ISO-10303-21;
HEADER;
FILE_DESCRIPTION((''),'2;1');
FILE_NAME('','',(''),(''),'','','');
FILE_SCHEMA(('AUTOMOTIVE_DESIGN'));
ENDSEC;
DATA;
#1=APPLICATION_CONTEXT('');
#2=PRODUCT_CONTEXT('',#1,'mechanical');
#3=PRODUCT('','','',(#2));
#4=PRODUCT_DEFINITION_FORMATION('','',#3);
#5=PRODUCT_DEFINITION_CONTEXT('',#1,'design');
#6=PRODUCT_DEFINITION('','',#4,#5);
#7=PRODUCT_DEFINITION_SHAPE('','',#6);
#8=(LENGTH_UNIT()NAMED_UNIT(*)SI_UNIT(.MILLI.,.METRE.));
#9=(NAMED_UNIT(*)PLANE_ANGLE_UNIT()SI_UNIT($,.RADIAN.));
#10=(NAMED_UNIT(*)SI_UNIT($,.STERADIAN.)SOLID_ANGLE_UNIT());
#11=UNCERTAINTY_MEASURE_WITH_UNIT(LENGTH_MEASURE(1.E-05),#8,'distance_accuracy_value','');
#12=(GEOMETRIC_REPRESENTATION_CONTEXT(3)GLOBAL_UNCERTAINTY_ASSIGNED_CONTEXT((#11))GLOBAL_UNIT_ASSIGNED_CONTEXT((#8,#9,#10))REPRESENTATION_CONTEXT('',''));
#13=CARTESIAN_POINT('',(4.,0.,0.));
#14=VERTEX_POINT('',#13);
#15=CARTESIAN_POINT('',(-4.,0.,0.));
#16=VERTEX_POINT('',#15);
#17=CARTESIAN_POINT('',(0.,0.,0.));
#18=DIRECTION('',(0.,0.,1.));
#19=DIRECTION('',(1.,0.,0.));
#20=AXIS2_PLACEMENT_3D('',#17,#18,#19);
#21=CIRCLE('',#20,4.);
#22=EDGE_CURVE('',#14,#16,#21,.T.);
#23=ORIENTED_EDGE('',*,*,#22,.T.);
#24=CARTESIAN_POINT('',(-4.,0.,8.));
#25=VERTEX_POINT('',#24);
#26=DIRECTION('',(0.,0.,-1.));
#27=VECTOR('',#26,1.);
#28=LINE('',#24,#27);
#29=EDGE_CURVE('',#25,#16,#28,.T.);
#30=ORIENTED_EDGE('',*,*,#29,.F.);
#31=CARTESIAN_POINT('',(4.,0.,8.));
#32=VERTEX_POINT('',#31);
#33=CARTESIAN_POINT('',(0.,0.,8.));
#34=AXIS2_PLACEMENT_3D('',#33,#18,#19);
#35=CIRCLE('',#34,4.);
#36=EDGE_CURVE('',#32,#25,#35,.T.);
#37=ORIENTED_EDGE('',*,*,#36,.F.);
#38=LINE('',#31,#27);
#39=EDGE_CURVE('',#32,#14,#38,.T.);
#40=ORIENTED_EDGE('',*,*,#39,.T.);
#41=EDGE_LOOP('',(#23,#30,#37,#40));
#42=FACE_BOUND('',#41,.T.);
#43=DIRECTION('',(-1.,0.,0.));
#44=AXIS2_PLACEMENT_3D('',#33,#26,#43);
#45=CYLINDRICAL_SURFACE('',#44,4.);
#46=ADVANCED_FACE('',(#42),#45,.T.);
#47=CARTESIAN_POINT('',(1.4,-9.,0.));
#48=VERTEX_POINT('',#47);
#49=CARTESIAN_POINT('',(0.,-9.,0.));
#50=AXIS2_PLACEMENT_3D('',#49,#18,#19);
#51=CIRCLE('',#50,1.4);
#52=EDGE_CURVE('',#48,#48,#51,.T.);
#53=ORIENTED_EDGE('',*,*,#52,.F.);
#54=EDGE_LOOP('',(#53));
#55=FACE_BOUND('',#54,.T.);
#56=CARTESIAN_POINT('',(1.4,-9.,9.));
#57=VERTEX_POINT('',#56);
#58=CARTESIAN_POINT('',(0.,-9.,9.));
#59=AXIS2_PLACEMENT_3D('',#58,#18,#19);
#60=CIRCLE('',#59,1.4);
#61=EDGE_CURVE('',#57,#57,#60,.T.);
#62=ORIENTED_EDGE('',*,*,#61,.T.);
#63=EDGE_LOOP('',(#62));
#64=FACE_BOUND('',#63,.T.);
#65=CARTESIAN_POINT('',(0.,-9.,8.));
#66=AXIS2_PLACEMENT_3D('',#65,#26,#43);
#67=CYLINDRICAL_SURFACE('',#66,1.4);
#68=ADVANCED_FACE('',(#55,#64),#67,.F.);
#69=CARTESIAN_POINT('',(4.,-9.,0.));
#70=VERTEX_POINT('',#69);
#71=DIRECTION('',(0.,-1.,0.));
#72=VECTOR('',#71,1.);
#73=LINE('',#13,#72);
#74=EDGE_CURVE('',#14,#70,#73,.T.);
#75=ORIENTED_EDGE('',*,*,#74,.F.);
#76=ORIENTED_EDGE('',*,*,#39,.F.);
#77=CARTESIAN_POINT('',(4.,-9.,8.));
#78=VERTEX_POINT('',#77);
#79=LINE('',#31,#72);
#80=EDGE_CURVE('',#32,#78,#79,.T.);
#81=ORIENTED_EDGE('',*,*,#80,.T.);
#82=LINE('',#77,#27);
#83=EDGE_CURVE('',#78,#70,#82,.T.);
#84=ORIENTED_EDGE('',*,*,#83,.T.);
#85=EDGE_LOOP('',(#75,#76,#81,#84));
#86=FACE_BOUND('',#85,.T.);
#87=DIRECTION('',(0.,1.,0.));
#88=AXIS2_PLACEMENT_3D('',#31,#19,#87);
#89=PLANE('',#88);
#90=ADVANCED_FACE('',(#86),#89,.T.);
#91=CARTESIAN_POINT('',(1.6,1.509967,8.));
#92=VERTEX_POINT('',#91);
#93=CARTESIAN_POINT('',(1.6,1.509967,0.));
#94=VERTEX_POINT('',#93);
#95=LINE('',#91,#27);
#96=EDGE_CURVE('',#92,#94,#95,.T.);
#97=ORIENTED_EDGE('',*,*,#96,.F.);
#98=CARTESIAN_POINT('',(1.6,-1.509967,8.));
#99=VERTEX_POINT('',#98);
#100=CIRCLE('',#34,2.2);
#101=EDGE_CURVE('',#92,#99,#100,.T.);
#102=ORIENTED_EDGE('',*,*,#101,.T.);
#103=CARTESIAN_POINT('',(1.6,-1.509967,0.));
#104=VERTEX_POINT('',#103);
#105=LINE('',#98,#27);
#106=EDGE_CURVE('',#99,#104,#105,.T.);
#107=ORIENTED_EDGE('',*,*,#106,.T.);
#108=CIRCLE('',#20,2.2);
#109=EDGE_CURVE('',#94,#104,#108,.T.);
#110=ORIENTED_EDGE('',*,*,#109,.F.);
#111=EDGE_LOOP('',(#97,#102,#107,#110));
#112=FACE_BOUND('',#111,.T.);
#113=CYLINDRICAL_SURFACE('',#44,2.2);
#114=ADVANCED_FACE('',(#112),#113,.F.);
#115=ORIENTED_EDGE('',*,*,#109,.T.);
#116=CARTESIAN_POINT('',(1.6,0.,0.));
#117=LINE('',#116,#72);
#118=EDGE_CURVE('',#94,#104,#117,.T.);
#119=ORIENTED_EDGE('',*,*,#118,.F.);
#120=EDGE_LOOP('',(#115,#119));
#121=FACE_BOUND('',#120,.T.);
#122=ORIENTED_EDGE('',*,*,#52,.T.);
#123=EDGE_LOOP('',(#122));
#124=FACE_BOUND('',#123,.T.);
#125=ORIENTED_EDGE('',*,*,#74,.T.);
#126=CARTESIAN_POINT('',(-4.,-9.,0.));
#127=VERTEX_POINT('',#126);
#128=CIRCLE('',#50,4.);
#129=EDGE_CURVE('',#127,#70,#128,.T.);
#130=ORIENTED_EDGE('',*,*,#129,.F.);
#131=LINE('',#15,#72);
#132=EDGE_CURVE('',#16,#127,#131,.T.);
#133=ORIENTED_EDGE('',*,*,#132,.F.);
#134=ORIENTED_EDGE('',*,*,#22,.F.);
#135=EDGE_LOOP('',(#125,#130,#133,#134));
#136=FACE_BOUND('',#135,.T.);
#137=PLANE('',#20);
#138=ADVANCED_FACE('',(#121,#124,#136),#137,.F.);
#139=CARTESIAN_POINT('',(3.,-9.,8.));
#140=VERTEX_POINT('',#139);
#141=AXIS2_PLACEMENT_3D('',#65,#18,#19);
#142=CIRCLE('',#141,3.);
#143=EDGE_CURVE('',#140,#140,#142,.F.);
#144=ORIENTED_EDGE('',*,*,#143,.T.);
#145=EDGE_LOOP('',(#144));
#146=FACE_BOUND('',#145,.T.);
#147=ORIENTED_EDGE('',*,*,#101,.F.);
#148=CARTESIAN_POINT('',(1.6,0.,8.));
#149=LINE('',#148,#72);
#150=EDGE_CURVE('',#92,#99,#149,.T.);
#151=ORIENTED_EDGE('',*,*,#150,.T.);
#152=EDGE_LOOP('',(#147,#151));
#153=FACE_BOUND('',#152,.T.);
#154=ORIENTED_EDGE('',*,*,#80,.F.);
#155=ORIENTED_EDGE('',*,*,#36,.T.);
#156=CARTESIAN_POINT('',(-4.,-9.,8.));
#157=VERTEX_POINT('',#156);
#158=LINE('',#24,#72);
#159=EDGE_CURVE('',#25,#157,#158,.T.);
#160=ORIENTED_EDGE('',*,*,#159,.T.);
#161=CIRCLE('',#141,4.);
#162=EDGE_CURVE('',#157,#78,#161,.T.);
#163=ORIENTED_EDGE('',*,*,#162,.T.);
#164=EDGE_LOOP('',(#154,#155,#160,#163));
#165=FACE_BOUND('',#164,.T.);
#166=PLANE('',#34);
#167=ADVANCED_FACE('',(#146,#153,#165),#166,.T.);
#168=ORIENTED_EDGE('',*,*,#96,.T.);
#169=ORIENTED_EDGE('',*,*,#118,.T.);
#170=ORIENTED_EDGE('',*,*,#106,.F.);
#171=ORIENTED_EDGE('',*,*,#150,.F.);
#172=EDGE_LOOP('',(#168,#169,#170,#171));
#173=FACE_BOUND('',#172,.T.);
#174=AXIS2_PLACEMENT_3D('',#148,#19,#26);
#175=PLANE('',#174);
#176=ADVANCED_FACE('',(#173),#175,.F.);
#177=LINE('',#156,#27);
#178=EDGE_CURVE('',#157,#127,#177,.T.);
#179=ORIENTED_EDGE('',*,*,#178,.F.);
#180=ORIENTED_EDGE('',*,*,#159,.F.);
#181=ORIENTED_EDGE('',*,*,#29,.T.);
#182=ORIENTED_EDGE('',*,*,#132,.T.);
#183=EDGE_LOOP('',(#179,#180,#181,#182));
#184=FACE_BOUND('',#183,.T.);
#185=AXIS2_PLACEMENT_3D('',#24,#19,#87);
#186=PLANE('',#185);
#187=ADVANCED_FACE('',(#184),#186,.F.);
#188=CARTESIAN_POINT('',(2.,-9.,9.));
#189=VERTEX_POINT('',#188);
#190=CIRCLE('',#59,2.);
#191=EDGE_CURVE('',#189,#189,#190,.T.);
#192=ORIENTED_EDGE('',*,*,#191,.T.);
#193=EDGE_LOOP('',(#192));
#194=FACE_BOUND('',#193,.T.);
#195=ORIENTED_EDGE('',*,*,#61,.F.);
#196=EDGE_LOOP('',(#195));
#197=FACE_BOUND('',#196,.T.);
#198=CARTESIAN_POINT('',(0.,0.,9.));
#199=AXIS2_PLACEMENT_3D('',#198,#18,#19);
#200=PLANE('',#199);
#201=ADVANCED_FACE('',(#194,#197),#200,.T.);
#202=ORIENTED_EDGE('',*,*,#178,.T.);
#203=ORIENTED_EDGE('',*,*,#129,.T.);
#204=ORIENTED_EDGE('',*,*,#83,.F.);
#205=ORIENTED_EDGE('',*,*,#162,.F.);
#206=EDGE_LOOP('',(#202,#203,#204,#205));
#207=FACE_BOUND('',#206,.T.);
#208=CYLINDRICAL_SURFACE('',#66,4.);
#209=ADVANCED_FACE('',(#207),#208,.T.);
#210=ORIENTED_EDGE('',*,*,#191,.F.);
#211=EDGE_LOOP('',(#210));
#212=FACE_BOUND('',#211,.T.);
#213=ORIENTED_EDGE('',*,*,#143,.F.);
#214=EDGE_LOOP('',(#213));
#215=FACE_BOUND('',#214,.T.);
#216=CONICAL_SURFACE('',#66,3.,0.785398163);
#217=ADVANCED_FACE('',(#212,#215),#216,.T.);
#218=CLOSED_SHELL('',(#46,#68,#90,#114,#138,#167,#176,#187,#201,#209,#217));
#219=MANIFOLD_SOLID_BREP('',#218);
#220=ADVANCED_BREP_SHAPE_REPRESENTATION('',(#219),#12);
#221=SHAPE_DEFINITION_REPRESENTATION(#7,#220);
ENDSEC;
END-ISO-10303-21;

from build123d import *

# Parameters (mm, degrees)
EXTRUDE_2_DEPTH     = 8
SKETCH_1_6_R        = 1.4
CUT_EXTRUDE_2_DEPTH = 8
SKETCH_1_8_R        = 2
SKETCH_1_8_R_2      = 1.4
EXTRUDE_3_DEPTH     = 9
CHAMFER_2_SIZE      = 1


with BuildPart() as part:
    # 草图1 → 凸台-拉伸2 (new body)
    with BuildSketch(Plane.XY):
        with BuildLine():
            Line((4, 0), (4, -9))
            ThreePointArc((4, -9), (0, -13), (-4, -9))
            Line((-4, -9), (-4, 0))
            ThreePointArc((-4, 0), (0, 4), (4, 0))
        make_face()
    extrude(amount=EXTRUDE_2_DEPTH)

    # 草图1<6> → 切除-拉伸2 (cut)
    with BuildSketch(Plane.XY):
        with BuildLine():
            Line((1.6, -1.509966887), (1.6, 1.509966887))
            ThreePointArc((1.6, 1.509966887), (-2.2, 0), (1.6, -1.509966887))
        make_face()
        with Locations((0, -9)):
            Circle(SKETCH_1_6_R)
    extrude(amount=CUT_EXTRUDE_2_DEPTH, mode=Mode.SUBTRACT)

    # 草图1<8> → 凸台-拉伸3 (add)
    with BuildSketch(Plane.XY):
        with Locations((0, -9)):
            Circle(SKETCH_1_8_R)
        with Locations((0, -9)):
            Circle(SKETCH_1_8_R_2, mode=Mode.SUBTRACT)
    extrude(amount=EXTRUDE_3_DEPTH)

    # 倒角2
    chamfer_2_edges = [part.edges().sort_by_distance(p)[0] for p in [
        (-2, -9, 8),
    ]]
    chamfer(chamfer_2_edges, length=CHAMFER_2_SIZE - 0.0001)  # a hair under: the kernel refuses the full size


solid = part.part
